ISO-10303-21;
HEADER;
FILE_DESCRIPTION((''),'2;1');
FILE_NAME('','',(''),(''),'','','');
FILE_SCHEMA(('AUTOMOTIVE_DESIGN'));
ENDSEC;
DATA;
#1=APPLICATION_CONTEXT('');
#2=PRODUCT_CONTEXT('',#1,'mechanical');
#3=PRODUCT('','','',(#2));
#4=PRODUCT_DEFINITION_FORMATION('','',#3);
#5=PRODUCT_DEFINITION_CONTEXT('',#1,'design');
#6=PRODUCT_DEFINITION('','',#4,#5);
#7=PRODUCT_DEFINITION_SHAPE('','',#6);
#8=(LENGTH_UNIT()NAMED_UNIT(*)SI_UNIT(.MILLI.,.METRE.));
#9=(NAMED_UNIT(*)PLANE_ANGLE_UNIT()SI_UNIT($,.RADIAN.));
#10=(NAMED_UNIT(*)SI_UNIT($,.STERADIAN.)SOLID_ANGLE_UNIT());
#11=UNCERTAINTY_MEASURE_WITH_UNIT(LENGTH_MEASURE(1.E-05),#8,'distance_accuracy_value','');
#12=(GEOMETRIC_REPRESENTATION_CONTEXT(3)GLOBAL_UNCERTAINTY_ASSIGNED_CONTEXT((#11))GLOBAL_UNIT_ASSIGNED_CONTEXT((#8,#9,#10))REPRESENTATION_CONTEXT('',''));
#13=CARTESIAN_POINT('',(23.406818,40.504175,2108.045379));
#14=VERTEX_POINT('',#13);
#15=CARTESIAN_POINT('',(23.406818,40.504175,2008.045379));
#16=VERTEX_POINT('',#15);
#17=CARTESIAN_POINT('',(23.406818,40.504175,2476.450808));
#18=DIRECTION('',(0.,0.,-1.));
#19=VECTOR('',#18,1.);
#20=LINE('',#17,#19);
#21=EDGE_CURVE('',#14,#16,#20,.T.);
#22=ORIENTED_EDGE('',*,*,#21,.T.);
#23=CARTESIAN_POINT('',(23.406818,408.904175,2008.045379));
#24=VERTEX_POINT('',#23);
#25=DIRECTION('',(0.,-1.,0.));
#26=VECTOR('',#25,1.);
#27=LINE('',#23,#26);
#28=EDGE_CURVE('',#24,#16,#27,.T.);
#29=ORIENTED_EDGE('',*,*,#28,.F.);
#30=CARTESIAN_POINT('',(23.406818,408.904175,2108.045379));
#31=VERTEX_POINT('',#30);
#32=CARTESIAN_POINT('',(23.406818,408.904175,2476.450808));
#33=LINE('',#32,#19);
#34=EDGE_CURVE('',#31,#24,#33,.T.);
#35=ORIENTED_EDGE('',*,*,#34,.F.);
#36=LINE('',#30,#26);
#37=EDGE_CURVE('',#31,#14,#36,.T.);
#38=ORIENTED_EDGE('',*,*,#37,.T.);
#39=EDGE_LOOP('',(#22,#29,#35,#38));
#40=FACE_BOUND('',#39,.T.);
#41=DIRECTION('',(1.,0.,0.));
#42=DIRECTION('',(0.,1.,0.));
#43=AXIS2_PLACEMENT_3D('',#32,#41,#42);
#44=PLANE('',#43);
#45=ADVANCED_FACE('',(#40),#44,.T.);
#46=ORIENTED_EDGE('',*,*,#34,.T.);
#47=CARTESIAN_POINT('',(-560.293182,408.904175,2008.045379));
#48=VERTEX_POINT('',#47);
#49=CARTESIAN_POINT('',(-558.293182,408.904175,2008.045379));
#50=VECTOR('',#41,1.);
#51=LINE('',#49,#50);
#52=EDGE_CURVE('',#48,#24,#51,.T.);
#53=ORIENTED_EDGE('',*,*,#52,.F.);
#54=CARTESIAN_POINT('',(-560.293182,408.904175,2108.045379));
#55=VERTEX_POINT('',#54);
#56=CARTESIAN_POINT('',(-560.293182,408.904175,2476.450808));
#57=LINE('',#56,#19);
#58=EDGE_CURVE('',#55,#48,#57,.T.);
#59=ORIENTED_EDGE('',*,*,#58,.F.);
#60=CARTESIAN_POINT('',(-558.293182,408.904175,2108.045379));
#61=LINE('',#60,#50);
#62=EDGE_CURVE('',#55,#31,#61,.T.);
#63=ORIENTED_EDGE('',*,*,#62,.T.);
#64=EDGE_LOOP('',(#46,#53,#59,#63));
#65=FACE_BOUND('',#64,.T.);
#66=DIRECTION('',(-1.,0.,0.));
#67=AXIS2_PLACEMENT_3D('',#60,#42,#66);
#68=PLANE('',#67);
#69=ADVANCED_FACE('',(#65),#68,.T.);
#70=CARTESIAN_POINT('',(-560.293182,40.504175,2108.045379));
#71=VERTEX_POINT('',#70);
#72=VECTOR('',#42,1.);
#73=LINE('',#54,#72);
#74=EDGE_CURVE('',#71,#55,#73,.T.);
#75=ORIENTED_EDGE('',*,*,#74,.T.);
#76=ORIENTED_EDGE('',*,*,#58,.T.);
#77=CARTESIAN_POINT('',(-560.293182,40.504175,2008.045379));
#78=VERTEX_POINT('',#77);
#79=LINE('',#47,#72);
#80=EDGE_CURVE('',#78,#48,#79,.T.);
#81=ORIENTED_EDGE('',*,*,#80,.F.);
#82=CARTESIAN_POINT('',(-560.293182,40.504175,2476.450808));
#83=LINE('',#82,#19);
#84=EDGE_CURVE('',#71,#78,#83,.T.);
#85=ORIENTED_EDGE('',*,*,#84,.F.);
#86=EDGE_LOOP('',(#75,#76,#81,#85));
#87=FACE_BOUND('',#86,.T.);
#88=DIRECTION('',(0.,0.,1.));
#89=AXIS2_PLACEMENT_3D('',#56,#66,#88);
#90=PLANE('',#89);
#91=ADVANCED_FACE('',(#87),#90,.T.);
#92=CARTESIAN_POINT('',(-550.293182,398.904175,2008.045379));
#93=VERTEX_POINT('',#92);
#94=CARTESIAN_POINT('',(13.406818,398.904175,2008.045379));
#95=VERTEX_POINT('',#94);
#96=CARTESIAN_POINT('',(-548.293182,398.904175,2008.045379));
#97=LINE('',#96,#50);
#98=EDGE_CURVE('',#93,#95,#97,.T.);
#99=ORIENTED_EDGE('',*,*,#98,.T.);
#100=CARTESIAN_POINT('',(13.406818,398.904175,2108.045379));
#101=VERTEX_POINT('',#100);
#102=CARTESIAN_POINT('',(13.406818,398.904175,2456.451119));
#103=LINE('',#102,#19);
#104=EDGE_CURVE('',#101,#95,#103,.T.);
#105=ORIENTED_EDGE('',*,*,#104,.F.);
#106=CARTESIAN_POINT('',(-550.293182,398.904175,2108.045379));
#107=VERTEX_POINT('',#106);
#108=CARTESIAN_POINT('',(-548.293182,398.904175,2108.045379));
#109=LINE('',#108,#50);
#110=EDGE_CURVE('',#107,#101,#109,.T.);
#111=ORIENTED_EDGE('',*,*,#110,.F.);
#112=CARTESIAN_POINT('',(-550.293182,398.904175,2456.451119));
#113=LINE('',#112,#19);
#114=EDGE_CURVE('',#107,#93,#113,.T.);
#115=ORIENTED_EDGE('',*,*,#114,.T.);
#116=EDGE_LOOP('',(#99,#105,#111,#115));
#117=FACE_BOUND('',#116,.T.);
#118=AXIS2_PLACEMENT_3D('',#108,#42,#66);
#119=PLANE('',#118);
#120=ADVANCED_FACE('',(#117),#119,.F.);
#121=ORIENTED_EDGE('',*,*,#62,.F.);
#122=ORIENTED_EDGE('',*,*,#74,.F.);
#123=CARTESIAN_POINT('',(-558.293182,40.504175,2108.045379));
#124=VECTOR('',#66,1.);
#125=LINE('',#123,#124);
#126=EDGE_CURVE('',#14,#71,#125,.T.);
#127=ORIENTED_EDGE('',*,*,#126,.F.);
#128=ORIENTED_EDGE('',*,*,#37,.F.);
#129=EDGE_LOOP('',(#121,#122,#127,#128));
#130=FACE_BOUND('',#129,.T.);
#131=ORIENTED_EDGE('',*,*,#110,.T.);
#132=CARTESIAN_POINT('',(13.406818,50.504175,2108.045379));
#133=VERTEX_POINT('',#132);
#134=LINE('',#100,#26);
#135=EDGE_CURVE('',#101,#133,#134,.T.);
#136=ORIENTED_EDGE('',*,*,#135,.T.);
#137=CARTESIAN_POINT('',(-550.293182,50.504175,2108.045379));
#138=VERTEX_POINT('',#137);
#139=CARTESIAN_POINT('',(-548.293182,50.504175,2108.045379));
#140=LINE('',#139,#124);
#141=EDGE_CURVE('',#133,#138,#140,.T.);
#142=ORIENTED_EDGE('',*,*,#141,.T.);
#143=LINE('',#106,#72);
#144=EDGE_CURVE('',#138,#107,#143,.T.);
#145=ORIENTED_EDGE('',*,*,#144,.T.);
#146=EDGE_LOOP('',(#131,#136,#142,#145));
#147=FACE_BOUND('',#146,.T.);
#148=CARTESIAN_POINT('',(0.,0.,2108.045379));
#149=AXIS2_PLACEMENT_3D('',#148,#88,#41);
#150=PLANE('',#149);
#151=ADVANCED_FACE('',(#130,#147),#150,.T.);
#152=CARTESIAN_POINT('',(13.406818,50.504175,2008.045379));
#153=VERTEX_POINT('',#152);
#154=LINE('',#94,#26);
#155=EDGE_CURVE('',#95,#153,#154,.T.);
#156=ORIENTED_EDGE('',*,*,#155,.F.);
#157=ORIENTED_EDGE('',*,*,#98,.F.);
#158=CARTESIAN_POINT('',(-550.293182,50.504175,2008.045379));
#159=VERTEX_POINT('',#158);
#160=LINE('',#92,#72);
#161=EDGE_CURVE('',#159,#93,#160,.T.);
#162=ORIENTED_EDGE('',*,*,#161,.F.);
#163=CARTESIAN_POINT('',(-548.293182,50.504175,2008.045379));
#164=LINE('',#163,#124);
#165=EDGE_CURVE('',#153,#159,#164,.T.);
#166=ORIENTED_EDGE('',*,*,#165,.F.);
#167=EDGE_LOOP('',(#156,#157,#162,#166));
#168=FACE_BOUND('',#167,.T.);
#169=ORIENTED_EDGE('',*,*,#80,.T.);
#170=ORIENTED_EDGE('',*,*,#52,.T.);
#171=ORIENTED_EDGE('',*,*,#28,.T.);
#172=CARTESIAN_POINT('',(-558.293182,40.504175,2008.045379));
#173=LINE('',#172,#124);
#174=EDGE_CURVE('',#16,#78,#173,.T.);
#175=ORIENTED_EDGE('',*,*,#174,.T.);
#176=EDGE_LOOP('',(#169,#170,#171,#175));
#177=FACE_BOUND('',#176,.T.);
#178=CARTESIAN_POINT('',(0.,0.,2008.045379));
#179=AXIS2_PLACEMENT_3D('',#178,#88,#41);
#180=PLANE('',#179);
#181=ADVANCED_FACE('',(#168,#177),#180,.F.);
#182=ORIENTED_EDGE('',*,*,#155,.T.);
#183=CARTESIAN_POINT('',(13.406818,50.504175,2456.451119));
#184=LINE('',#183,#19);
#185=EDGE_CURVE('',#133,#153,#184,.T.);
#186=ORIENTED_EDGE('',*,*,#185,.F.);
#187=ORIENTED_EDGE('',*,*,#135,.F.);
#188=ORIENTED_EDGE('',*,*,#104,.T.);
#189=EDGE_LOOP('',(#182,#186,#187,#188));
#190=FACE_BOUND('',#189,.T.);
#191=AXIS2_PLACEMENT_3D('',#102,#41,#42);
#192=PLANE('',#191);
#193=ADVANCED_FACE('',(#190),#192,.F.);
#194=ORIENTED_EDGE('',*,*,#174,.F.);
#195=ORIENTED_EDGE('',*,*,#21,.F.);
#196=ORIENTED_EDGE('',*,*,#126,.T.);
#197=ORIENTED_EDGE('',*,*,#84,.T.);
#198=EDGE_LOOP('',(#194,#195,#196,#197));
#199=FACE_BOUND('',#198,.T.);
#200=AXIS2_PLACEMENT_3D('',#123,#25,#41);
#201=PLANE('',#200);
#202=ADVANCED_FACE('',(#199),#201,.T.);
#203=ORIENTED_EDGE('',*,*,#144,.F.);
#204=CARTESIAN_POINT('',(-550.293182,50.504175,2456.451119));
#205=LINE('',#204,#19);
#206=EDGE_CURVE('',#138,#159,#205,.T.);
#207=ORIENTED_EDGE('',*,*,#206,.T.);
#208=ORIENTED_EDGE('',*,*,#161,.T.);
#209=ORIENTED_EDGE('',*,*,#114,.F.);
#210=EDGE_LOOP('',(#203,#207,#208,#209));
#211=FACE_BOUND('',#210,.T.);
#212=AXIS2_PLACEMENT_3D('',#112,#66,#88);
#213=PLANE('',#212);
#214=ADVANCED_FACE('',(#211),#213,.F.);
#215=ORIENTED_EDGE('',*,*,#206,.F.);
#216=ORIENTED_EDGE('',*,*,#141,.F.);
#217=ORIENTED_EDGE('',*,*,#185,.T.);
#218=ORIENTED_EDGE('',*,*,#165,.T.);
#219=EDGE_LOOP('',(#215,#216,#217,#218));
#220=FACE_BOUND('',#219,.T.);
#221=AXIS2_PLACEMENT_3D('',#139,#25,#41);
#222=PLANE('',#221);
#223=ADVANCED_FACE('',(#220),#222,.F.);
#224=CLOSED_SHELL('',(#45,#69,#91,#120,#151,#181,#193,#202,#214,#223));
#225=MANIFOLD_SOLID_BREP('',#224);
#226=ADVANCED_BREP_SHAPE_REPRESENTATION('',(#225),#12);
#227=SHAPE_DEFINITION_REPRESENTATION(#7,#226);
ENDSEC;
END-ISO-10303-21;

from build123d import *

# Parameters (mm, degrees)
EXTRUDE_START         = -100
EXTRUDE_1_OUTLINE_W   = 579.7
EXTRUDE_1_OUTLINE_H   = 368.4
EXTRUDE_1_OUTLINE_W_2 = 559.7
EXTRUDE_1_OUTLINE_H_2 = 348.4
EXTRUDE_1_DEPTH       = 100
SKETCH_3_W            = 2
SKETCH_3_H            = 368.4
EXTRUDE_2_DEPTH       = 100
SKETCH_4_W            = 2
SKETCH_4_H            = 348.4
CUT_EXTRUDE_3_DEPTH   = 100


# Read off the part's stored shape, not the designer's step: 填料-伸長1
with BuildPart() as part:
    # 填料-伸長1 outline → 填料-伸長1 (new body)
    with BuildSketch(Plane(origin=(0, 0, 2008.045378916), x_dir=(-1, 0, 0), z_dir=(0, 0, -1)).offset(EXTRUDE_START)):
        with Locations((268.443182196, 224.704175019)):
            Rectangle(EXTRUDE_1_OUTLINE_W, EXTRUDE_1_OUTLINE_H)
        with Locations((268.443182196, 224.704175019)):
            Rectangle(EXTRUDE_1_OUTLINE_W_2, EXTRUDE_1_OUTLINE_H_2, mode=Mode.SUBTRACT)
    extrude(amount=EXTRUDE_1_DEPTH)

    # 草圖3 → 填料-伸長2 (add)
    with BuildSketch(Plane(origin=(0, 0, 2008.045378916), x_dir=(-1, 0, 0), z_dir=(0, 0, -1))):
        with Locations((-22.406817804, 224.704175019)):
            Rectangle(SKETCH_3_W, SKETCH_3_H)
        with Locations((559.293182196, 224.704175019)):
            Rectangle(SKETCH_3_W, SKETCH_3_H)
    extrude(amount=-EXTRUDE_2_DEPTH)

    # 草圖4 → 除料-伸長3 (cut)
    with BuildSketch(Plane(origin=(0, 0, 2008.045378916), x_dir=(-1, 0, 0), z_dir=(0, 0, -1))):
        with Locations((-12.406817804, 224.704175019)):
            Rectangle(SKETCH_4_W, SKETCH_4_H)
        with Locations((549.293182196, 224.704175019)):
            Rectangle(SKETCH_4_W, SKETCH_4_H)
    extrude(amount=-CUT_EXTRUDE_3_DEPTH, mode=Mode.SUBTRACT)


solid = part.part
